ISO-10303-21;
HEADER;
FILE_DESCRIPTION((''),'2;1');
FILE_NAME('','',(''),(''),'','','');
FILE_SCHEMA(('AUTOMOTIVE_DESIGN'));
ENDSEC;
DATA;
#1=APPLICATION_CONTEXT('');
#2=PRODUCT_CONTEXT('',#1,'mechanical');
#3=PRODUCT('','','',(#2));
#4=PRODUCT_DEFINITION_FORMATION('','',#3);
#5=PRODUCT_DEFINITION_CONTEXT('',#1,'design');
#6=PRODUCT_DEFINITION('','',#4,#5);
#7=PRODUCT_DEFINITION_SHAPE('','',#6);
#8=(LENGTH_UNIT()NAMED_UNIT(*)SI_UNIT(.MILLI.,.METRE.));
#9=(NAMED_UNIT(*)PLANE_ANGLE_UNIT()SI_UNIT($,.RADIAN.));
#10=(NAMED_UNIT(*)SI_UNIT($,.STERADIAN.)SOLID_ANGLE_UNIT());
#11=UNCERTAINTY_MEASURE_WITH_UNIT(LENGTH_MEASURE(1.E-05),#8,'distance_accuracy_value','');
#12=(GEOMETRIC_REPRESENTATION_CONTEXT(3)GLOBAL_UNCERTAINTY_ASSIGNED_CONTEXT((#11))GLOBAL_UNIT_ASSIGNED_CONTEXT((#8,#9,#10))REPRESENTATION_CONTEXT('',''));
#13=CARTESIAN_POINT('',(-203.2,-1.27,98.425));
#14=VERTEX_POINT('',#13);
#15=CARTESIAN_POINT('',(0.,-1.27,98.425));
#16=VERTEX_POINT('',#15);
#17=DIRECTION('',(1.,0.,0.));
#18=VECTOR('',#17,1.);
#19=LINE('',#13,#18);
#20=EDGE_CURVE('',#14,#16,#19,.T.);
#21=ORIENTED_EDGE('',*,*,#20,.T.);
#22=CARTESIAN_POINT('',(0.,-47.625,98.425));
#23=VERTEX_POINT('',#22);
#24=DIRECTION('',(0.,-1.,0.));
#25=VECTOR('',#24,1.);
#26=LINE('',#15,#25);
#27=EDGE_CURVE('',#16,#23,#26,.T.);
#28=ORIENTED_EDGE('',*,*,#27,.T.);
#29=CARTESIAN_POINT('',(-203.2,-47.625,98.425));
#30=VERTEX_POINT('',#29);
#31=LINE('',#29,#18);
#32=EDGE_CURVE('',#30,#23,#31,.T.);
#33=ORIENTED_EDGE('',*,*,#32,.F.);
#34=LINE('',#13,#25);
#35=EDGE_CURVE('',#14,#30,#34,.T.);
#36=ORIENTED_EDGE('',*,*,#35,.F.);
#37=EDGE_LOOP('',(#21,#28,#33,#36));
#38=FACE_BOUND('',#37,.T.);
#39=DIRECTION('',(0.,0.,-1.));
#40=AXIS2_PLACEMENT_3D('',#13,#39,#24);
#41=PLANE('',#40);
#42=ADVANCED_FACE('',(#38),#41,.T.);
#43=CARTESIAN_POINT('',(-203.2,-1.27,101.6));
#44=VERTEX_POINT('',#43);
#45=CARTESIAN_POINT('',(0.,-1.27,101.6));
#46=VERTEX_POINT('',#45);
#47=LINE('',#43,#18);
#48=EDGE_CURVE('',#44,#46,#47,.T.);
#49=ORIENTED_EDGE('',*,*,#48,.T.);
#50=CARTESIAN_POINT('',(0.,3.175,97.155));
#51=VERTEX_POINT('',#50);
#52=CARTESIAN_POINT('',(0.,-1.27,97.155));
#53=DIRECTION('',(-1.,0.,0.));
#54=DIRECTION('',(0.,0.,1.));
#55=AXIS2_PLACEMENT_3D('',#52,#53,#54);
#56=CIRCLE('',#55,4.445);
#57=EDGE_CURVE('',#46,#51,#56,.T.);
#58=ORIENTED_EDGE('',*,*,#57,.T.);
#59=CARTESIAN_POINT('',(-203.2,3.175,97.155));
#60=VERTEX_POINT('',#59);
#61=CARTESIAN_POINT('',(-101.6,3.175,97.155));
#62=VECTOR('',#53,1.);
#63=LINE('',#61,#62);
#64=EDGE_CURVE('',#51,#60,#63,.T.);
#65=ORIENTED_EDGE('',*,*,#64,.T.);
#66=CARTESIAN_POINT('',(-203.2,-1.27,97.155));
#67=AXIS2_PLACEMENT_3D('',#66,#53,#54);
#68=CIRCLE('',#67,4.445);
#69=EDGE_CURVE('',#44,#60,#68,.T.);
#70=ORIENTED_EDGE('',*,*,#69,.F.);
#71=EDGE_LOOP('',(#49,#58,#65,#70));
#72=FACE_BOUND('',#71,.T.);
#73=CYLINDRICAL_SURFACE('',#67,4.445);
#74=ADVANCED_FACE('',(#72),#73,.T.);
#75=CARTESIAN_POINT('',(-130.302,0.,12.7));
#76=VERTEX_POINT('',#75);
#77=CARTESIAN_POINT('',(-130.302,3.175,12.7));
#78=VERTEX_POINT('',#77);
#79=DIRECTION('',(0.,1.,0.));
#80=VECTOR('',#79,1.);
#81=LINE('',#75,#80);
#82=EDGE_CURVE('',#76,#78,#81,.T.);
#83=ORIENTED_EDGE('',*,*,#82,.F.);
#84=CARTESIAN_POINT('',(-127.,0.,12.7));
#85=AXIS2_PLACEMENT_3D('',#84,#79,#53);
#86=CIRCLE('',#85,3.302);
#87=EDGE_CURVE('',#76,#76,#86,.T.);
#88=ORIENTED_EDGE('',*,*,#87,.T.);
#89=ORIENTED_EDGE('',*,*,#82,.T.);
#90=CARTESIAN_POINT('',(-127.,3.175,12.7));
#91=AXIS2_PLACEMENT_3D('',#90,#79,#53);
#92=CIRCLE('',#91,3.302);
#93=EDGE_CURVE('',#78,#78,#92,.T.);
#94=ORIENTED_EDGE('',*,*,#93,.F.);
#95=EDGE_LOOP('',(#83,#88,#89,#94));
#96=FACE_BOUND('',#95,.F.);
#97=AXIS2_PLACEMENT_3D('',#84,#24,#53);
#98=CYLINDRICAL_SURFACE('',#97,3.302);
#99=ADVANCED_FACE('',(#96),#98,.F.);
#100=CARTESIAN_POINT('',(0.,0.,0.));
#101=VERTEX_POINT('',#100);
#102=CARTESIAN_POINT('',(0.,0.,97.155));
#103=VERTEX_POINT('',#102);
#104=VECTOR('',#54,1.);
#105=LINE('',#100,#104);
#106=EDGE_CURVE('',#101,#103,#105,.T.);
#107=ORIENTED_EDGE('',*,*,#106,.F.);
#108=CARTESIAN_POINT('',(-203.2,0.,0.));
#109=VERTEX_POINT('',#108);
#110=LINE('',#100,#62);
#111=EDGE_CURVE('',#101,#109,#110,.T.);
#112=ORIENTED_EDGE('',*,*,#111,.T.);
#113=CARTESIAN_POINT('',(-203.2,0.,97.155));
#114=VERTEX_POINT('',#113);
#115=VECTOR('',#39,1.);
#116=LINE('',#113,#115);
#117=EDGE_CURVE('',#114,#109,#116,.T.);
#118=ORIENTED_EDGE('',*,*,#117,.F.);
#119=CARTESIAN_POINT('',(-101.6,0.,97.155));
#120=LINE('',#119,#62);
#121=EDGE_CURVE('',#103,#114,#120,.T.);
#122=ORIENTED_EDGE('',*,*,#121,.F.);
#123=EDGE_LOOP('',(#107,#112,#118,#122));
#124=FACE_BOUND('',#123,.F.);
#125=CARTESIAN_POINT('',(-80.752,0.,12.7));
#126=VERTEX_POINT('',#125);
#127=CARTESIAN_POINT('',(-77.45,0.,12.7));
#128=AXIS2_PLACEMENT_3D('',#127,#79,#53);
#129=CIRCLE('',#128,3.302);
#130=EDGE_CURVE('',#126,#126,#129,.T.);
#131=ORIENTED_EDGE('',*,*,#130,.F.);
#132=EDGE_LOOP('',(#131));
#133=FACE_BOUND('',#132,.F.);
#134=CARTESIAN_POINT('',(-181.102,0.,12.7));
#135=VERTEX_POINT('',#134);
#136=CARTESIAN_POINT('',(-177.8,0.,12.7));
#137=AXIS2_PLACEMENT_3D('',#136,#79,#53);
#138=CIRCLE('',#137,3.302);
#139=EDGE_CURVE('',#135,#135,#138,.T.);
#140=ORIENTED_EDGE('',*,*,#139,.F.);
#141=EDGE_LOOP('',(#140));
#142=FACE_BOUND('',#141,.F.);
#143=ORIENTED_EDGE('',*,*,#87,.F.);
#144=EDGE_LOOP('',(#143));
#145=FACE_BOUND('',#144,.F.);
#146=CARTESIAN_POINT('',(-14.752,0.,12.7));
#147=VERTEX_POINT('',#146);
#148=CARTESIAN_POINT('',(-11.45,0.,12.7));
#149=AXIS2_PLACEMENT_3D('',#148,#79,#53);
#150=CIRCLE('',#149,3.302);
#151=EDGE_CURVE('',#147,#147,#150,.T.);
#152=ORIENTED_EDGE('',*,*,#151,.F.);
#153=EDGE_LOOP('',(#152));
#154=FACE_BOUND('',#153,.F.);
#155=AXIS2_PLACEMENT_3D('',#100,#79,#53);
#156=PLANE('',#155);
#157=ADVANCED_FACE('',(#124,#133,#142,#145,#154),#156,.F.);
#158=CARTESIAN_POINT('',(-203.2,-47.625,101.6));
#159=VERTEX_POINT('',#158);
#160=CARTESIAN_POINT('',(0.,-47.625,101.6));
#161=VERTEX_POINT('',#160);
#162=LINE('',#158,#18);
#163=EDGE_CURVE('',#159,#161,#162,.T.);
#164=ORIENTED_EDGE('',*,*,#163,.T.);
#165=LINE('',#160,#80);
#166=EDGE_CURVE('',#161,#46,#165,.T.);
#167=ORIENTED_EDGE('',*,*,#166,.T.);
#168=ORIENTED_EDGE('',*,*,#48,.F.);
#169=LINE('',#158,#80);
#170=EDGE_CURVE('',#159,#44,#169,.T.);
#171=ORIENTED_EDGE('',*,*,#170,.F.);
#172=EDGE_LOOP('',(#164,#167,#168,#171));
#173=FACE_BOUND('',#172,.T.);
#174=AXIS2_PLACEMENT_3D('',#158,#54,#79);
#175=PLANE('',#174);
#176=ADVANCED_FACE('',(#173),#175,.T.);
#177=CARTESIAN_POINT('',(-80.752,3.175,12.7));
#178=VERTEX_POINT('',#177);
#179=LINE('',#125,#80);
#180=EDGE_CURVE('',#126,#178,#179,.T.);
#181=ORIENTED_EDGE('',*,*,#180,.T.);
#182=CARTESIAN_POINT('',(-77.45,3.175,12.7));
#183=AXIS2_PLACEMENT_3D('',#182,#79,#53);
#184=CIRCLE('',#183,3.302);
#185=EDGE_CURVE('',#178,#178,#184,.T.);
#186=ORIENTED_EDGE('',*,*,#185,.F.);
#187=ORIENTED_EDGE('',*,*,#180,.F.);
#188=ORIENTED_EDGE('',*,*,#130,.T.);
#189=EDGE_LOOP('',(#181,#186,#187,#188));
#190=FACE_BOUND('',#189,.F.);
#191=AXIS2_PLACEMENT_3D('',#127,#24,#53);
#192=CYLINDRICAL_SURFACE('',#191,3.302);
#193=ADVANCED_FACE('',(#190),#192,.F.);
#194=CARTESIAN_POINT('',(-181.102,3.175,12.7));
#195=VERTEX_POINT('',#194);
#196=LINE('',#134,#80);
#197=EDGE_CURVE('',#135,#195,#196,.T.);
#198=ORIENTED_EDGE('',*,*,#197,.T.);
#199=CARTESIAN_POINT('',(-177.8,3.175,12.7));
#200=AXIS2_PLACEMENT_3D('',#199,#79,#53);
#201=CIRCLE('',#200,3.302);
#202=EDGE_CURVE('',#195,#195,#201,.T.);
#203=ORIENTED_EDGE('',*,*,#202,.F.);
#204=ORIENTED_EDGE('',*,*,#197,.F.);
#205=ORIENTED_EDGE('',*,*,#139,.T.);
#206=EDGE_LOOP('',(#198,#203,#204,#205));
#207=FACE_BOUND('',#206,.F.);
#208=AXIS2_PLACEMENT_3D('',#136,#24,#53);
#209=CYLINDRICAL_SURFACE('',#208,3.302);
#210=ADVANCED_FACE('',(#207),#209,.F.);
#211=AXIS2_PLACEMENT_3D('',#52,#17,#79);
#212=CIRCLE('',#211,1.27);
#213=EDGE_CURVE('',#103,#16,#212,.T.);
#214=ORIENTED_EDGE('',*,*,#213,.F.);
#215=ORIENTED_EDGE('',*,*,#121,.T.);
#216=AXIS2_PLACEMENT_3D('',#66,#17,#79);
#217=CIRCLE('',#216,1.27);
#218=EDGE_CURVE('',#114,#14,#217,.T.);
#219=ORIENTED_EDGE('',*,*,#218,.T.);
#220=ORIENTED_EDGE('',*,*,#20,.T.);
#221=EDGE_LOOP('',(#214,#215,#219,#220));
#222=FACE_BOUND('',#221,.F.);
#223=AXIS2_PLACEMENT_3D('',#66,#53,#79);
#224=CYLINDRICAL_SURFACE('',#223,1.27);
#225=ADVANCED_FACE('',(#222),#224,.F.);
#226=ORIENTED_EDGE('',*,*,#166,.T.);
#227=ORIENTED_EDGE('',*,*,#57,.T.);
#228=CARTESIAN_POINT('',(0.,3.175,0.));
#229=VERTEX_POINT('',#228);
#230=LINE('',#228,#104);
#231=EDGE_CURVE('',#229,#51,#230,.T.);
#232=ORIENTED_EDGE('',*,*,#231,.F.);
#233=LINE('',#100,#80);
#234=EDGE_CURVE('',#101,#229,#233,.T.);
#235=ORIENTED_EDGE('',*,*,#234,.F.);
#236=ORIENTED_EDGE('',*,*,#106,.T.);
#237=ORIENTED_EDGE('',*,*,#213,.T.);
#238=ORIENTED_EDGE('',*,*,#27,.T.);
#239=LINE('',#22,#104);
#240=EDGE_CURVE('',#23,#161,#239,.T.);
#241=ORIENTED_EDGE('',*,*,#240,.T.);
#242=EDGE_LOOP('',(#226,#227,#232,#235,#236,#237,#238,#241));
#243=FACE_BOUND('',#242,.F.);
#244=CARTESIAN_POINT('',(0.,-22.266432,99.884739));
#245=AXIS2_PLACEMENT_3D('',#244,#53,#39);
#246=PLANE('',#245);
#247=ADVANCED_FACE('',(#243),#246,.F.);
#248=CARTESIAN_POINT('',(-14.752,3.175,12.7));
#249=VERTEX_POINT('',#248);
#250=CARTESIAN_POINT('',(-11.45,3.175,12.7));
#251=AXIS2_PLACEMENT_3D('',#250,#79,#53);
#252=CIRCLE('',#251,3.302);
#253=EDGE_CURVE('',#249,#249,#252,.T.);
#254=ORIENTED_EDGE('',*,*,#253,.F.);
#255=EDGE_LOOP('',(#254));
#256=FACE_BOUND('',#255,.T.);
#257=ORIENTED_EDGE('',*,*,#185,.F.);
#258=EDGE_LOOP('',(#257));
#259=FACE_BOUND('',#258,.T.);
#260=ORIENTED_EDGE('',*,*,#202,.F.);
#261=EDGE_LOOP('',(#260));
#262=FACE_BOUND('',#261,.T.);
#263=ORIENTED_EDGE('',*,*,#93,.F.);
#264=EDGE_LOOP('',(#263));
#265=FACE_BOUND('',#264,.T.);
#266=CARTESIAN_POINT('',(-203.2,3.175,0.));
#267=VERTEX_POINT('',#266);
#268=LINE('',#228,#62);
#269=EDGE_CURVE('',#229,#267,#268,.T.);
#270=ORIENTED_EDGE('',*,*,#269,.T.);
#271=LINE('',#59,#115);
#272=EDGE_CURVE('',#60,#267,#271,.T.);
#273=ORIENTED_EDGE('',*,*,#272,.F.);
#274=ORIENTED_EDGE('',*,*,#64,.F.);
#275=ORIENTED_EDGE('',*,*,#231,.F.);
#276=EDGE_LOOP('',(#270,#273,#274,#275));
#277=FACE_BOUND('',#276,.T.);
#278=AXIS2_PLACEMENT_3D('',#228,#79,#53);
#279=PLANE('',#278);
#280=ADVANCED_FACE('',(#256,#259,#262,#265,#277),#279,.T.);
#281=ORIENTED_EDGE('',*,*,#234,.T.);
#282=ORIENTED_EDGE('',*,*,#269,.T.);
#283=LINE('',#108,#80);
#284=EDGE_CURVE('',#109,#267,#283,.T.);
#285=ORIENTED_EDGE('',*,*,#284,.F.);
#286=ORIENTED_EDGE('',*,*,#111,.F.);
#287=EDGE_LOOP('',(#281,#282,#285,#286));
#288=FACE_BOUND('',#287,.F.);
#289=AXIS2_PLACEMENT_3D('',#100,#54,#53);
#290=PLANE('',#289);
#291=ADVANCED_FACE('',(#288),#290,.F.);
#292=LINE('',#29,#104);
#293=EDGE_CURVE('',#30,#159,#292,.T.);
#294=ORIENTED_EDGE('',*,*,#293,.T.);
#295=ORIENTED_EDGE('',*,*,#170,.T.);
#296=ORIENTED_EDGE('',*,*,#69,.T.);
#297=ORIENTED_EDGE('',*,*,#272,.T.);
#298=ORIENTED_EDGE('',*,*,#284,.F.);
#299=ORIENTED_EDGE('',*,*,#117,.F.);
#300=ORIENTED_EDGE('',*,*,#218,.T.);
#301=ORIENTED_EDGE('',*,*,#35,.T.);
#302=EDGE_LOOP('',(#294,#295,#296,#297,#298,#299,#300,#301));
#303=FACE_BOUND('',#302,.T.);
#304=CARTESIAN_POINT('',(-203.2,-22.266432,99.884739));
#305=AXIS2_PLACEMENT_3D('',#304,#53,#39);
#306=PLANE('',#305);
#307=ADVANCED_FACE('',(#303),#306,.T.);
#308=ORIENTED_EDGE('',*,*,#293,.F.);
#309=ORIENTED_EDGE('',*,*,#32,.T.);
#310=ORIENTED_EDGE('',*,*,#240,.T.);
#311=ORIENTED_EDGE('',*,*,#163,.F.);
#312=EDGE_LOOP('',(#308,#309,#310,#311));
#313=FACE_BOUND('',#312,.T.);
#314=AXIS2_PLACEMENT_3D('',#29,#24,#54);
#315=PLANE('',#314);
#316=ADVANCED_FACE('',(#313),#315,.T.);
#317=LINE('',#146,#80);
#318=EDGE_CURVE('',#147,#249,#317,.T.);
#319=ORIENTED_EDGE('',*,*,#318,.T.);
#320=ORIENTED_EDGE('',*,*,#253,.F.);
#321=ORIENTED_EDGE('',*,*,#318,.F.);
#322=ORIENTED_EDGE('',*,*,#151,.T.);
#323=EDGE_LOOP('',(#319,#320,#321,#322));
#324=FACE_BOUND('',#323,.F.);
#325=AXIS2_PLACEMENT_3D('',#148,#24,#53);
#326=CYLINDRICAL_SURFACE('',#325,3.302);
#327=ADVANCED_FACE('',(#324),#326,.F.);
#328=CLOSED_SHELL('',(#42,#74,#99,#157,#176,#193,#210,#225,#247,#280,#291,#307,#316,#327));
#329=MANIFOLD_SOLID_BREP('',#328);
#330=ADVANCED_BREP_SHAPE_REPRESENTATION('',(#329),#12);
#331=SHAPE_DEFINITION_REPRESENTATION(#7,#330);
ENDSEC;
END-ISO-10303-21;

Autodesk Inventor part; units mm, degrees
ref_plane "YZ Plane" through (0, 0, 0) normal (1, 0, 0) x (0, 1, 0)
ref_plane "XZ Plane" through (0, 0, 0) normal (0, 1, 0) x (-1, 0, 0)
ref_plane "XY Plane" through (0, 0, 0) normal (0, 0, 1) x (1, 0, 0)
sketch "Sketch1" plane through (0, 0, 0) normal (0, 1, 0) x (-1, 0, 0)
  line L0 (0, 0) -> (203.2, 0)
  line L1 (203.2, 0) -> (203.2, 25.4)
  line L2 (203.2, 25.4) -> (0, 25.4) construction
  line L3 (0, 25.4) -> (0, 0)
  line L4 (11.45, 12.7) -> (77.45, 12.7) construction
  circle A0 centre (11.45, 12.7) radius 3.302
  circle A1 centre (77.45, 12.7) radius 3.302
  line L5 (44.45, 25.4) -> (44.45, 0) construction
  circle A2 centre (127, 12.7) radius 3.302
  circle A3 centre (177.8, 12.7) radius 3.302
  line L6 (127, 12.7) -> (177.8, 12.7) construction
  line L7 (152.4, 25.4) -> (152.4, 0) construction
  line L8 (0, 25.4) -> (0, 101.6)
  line L9 (0, 101.6) -> (203.2, 101.6)
  line L10 (203.2, 101.6) -> (203.2, 25.4)
  point P0 (44.45, 12.7)
  point P1 (152.4, 12.7)
  dimension "d0" = 66
  dimension "d1" = 6.604
  dimension "d2" = 6.604
  dimension "d3" = 25.4
  dimension "d4" = 44.45
  dimension "d6" = 50.8
  dimension "d7" = 50.8
  dimension "d8" = 76.2
  dimension "d9" = 203.2
extrude "Plate1" add sketch "Sketch1" along normal blind 3.175
sketch "Sketch2" plane through (-203.2, 3.175, 98.425) normal (0, 0, 1) x (1, 0, 0)
  line L0 (203.2, 0) -> (0, 0)
  line L1 (0, 0) -> (0, -50.8)
  line L2 (0, -50.8) -> (203.2, -50.8)
  line L3 (203.2, -50.8) -> (203.2, 0)
edge flange "Flange1" height 50.8 angle 90 thickness 3.175 bend radius 1.27 thickness toward (0, 0, 1) relief tear relief width 3.175 relief depth 1.5875 edges at (-101.6, 0, 101.6) wall of the first edge with corners at (0, 3.175, 98.425) (-203.2, 3.175, 98.425) (-203.2, -47.625, 98.425) (0, -47.625, 98.425)
bend "Bend1"
corner "Corner1"
equation "\"d11\" = BendReliefWidth"
equation "\"d12\" = BendReliefDepth"
equation "\"d13\" = MinimumRemnant"
equation "\"d14\" = BendRadius"
equation "\"d18\" = CornerReliefSize"
equation "\"d19\" = GapSize"
equation "\"d20\" = JacobiRadiusSize"
equation "\"BendRadius\" = Thickness"
equation "\"BendReliefWidth\" = Thickness"
equation "\"BendReliefDepth\" = 0.5 * Thickness"
equation "\"CornerReliefSize\" = 4 * Thickness"
equation "\"MinimumRemnant\" = 2 * Thickness"
equation "\"TransitionRadius\" = BendRadius"
equation "\"JacobiRadiusSize\" = BendRadius"
equation "\"GapSize\" = Thickness"
equation "\"d10\" = BendRadius"
equation "\"Thickness\" = 3.175"
properties part number "Electrical Board Mount Part1" material "Aluminum 6061"
